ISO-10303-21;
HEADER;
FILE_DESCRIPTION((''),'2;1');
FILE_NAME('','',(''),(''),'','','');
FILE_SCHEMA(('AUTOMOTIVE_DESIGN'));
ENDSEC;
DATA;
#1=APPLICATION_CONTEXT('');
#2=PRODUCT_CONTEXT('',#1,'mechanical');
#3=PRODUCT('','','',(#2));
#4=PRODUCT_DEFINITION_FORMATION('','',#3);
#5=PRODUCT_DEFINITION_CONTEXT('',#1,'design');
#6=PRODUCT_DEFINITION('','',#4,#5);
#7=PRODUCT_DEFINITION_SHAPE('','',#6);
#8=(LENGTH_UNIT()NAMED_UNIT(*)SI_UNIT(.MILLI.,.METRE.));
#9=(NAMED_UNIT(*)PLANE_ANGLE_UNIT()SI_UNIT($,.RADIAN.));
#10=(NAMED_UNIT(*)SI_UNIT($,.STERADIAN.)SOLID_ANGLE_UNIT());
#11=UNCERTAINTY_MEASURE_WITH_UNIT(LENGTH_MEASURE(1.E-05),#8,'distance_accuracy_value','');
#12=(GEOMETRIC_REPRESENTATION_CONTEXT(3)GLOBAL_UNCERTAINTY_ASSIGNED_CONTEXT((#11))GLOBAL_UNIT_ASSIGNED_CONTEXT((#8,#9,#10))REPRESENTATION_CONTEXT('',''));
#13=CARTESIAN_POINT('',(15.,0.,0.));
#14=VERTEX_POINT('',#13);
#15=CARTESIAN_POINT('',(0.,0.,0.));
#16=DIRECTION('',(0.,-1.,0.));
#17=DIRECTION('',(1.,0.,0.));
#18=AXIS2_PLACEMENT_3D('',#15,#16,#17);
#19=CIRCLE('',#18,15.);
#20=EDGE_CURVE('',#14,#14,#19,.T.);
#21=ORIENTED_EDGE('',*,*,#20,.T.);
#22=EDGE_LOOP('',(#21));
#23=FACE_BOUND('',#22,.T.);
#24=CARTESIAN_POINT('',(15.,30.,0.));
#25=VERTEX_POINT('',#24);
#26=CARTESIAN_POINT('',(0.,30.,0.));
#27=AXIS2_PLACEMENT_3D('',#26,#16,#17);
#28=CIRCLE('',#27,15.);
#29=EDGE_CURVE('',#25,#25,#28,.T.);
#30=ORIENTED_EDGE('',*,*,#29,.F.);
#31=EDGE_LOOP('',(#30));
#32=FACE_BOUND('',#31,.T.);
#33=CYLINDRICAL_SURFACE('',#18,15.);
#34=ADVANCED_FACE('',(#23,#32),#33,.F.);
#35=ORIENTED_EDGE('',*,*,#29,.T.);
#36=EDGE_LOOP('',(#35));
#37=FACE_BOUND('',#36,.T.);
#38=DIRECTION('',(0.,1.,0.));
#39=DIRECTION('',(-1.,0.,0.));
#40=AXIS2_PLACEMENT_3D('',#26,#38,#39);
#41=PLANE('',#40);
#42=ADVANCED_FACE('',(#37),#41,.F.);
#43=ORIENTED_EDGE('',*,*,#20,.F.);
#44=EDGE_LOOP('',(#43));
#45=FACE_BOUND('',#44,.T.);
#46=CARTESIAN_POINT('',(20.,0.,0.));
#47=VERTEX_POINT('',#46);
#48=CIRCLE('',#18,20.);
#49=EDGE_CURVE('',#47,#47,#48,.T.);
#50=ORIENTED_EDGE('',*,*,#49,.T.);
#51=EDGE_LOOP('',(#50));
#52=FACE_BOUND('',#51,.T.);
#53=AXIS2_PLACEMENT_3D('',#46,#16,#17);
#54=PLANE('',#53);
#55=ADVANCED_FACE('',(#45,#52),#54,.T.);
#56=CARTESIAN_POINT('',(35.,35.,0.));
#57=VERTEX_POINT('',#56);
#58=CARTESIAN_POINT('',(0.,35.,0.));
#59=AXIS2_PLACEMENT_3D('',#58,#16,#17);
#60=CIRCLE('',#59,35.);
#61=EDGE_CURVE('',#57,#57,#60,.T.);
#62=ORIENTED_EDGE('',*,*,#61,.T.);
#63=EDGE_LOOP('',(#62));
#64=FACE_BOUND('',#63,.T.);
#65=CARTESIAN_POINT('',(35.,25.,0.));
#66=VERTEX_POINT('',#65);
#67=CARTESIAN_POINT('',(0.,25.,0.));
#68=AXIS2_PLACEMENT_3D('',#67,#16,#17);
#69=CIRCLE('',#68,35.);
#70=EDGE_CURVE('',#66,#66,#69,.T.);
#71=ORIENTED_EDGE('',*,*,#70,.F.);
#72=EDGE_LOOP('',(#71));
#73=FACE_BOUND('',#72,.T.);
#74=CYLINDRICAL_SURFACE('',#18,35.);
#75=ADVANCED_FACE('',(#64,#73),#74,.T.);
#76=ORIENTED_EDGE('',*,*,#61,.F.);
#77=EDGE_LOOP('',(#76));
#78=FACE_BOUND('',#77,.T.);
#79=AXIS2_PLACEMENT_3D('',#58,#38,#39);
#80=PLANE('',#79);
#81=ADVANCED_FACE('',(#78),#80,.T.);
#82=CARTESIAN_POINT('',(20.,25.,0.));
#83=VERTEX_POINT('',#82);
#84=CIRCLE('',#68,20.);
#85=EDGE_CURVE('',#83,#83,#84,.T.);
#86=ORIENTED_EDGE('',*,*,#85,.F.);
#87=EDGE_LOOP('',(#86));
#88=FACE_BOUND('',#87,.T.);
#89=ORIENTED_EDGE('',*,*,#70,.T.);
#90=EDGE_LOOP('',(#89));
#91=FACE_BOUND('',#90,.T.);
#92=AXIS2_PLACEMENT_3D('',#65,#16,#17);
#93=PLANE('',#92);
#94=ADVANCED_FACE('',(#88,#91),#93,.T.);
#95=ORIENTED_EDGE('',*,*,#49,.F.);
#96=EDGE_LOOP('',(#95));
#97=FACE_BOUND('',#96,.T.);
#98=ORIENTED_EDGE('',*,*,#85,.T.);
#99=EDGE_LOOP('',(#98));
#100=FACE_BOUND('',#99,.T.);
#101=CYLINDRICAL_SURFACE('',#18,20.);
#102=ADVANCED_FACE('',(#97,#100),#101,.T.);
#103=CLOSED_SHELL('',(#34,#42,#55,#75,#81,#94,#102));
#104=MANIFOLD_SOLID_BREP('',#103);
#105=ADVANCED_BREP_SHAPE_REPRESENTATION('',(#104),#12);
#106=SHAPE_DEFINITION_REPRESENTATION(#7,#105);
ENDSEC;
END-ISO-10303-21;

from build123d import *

# Parameters (mm, degrees)
SHELL1_OUTLINE_R = 15
SHELL1_DEPTH     = 30


# Read off the part's stored shape, not the designer's step: Shell1
with BuildPart() as part:
    # Sketch1 → Revolve1 (revolve)
    with BuildSketch(Plane.XY):
        Polygon((0, 35), (35, 35), (35, 25), (20, 25), (20, 0), (0, 0), align=None)
    revolve(axis=Axis((0, 0, 0), (0, 1, 0)))

    # Shell1 outline → Shell1 (cut)
    with BuildSketch(Plane(origin=(0, 0, 0), x_dir=(1, 0, 0), z_dir=(0, 1, 0))):
        Circle(SHELL1_OUTLINE_R)
    extrude(amount=SHELL1_DEPTH, mode=Mode.SUBTRACT)


solid = part.part
